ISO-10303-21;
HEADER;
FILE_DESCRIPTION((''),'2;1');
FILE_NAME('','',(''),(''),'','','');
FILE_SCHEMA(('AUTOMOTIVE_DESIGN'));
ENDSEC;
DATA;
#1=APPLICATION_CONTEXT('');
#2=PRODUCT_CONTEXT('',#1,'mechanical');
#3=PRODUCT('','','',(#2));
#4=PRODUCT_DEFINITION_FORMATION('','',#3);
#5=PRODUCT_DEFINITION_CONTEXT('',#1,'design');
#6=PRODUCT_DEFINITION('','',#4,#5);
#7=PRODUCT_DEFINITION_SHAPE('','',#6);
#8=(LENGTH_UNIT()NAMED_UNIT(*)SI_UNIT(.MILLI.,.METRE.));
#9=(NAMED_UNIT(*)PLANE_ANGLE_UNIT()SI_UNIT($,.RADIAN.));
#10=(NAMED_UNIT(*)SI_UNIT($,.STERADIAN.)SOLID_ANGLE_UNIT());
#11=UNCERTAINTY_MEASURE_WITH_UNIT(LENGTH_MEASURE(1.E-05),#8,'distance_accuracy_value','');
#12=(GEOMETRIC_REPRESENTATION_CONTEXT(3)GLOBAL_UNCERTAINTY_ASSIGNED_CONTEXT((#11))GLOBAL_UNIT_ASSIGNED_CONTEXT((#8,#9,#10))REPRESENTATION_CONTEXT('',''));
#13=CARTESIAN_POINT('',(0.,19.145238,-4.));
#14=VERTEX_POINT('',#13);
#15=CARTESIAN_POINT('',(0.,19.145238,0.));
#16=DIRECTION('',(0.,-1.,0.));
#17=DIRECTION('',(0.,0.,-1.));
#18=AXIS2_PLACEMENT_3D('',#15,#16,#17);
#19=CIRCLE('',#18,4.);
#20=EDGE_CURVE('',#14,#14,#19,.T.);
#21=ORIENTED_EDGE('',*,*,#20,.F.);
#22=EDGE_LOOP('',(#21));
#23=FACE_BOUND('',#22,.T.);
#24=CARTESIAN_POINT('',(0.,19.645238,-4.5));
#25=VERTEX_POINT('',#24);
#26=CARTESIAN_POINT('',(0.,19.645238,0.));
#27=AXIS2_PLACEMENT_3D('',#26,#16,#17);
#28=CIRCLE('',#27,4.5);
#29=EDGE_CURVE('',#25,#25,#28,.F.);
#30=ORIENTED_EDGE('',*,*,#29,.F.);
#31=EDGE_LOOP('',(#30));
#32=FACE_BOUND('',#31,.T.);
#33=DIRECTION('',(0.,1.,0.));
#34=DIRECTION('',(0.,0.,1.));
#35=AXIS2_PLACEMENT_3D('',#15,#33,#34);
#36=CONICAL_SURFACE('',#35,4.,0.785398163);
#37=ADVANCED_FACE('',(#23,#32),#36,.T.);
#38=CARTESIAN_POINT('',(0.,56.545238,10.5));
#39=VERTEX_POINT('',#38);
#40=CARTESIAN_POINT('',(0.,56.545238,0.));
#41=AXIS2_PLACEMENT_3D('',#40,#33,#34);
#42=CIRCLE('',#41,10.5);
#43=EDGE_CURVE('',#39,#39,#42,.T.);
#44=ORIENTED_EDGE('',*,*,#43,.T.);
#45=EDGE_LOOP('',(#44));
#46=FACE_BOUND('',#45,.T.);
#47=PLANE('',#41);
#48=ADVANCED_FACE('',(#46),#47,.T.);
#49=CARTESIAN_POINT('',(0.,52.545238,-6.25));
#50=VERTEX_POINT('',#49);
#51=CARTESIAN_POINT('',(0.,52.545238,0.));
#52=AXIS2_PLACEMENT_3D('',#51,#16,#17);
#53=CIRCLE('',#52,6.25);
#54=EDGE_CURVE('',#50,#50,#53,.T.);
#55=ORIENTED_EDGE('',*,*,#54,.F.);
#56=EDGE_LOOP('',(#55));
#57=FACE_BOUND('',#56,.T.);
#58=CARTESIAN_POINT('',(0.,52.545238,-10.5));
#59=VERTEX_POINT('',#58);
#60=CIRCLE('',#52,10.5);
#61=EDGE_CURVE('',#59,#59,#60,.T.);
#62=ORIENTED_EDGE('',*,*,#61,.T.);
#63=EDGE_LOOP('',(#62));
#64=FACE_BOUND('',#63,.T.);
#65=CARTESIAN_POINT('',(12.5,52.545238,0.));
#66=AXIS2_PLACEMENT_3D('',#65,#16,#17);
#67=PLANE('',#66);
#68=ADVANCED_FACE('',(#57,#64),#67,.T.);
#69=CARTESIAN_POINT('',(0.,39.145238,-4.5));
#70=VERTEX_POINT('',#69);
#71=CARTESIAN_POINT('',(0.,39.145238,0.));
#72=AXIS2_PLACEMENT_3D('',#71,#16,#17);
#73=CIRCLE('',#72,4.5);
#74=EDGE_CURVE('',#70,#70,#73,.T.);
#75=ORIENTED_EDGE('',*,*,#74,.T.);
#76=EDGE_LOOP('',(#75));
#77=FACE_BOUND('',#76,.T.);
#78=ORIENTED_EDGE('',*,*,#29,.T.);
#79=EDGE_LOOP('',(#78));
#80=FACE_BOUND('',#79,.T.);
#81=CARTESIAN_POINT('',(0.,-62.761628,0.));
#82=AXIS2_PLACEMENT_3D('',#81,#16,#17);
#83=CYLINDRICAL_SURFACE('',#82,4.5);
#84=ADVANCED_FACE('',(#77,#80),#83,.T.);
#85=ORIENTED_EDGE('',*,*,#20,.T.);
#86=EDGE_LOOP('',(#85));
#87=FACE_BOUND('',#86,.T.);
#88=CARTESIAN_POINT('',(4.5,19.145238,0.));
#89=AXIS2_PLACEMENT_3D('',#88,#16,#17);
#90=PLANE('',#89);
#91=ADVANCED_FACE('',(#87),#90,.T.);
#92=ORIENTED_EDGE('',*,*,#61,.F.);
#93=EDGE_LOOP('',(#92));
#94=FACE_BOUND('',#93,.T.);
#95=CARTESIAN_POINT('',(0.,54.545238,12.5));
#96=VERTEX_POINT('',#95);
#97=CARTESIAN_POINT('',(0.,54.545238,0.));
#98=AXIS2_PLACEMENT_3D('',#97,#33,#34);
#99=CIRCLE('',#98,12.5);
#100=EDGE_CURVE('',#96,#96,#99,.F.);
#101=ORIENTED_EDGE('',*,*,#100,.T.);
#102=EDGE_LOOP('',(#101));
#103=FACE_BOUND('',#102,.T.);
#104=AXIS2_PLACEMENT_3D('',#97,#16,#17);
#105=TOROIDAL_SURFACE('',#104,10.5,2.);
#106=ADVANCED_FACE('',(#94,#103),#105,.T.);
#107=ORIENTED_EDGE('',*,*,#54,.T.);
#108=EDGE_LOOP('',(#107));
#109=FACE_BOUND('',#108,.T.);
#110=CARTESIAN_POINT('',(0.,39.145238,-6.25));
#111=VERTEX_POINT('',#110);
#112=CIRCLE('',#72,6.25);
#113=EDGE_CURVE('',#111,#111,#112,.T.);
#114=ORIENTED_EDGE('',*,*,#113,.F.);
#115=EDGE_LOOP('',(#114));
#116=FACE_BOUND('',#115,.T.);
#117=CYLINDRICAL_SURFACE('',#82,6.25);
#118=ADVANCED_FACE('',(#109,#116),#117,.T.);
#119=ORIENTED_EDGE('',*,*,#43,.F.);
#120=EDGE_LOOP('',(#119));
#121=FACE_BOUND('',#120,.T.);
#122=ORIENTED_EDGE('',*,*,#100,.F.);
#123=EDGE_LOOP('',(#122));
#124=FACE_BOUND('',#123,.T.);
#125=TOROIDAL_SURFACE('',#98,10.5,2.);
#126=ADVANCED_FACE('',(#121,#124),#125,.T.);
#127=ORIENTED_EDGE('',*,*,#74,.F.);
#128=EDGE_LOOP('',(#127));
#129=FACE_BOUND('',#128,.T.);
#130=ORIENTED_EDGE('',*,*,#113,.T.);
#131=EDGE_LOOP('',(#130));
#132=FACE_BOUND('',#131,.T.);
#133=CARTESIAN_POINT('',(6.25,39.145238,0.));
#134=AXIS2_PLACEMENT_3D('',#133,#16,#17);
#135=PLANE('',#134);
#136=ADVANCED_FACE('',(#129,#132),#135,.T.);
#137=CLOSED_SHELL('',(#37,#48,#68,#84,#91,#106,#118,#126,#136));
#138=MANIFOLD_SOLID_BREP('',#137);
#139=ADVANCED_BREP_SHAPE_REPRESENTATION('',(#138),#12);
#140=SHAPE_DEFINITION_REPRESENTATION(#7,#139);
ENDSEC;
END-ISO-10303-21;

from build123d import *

# Parameters (mm, degrees)
FILETE2_R     = 2
CHANFRO1_SIZE = 0.5


with BuildPart() as part:
    # Esboço1 → Revolução1 (revolve)
    with BuildSketch(Plane.XY, mode=Mode.PRIVATE) as revolu_o1_sk:
        Polygon((0, 56.545238095), (12.5, 56.545238095), (12.5, 52.545238095), (6.25, 52.545238095), (6.25, 39.145238095), (4.5, 39.145238095), (4.5, 19.145238095), (0, 19.145238095), align=None)
    revolve(revolu_o1_sk.sketch.rotate(Axis((0, -62.761627907, 0), (0, 1, 0)), 90), axis=Axis((0, -62.761627907, 0), (0, 1, 0)))

    # Filete2
    filete2_edges = [part.edges().sort_by_distance(p)[0] for p in [
        (0, 52.545238095, 12.5),
        (0, 56.545238095, 12.5),
    ]]
    fillet(filete2_edges, radius=FILETE2_R - 0.0001)  # a hair under: the kernel refuses the full size

    # Chanfro1
    chanfro1_edges = [part.edges().sort_by_distance(p)[0] for p in [
        (0, 19.145238095, 4.5),
    ]]
    chamfer(chanfro1_edges, length=CHANFRO1_SIZE)


solid = part.part
